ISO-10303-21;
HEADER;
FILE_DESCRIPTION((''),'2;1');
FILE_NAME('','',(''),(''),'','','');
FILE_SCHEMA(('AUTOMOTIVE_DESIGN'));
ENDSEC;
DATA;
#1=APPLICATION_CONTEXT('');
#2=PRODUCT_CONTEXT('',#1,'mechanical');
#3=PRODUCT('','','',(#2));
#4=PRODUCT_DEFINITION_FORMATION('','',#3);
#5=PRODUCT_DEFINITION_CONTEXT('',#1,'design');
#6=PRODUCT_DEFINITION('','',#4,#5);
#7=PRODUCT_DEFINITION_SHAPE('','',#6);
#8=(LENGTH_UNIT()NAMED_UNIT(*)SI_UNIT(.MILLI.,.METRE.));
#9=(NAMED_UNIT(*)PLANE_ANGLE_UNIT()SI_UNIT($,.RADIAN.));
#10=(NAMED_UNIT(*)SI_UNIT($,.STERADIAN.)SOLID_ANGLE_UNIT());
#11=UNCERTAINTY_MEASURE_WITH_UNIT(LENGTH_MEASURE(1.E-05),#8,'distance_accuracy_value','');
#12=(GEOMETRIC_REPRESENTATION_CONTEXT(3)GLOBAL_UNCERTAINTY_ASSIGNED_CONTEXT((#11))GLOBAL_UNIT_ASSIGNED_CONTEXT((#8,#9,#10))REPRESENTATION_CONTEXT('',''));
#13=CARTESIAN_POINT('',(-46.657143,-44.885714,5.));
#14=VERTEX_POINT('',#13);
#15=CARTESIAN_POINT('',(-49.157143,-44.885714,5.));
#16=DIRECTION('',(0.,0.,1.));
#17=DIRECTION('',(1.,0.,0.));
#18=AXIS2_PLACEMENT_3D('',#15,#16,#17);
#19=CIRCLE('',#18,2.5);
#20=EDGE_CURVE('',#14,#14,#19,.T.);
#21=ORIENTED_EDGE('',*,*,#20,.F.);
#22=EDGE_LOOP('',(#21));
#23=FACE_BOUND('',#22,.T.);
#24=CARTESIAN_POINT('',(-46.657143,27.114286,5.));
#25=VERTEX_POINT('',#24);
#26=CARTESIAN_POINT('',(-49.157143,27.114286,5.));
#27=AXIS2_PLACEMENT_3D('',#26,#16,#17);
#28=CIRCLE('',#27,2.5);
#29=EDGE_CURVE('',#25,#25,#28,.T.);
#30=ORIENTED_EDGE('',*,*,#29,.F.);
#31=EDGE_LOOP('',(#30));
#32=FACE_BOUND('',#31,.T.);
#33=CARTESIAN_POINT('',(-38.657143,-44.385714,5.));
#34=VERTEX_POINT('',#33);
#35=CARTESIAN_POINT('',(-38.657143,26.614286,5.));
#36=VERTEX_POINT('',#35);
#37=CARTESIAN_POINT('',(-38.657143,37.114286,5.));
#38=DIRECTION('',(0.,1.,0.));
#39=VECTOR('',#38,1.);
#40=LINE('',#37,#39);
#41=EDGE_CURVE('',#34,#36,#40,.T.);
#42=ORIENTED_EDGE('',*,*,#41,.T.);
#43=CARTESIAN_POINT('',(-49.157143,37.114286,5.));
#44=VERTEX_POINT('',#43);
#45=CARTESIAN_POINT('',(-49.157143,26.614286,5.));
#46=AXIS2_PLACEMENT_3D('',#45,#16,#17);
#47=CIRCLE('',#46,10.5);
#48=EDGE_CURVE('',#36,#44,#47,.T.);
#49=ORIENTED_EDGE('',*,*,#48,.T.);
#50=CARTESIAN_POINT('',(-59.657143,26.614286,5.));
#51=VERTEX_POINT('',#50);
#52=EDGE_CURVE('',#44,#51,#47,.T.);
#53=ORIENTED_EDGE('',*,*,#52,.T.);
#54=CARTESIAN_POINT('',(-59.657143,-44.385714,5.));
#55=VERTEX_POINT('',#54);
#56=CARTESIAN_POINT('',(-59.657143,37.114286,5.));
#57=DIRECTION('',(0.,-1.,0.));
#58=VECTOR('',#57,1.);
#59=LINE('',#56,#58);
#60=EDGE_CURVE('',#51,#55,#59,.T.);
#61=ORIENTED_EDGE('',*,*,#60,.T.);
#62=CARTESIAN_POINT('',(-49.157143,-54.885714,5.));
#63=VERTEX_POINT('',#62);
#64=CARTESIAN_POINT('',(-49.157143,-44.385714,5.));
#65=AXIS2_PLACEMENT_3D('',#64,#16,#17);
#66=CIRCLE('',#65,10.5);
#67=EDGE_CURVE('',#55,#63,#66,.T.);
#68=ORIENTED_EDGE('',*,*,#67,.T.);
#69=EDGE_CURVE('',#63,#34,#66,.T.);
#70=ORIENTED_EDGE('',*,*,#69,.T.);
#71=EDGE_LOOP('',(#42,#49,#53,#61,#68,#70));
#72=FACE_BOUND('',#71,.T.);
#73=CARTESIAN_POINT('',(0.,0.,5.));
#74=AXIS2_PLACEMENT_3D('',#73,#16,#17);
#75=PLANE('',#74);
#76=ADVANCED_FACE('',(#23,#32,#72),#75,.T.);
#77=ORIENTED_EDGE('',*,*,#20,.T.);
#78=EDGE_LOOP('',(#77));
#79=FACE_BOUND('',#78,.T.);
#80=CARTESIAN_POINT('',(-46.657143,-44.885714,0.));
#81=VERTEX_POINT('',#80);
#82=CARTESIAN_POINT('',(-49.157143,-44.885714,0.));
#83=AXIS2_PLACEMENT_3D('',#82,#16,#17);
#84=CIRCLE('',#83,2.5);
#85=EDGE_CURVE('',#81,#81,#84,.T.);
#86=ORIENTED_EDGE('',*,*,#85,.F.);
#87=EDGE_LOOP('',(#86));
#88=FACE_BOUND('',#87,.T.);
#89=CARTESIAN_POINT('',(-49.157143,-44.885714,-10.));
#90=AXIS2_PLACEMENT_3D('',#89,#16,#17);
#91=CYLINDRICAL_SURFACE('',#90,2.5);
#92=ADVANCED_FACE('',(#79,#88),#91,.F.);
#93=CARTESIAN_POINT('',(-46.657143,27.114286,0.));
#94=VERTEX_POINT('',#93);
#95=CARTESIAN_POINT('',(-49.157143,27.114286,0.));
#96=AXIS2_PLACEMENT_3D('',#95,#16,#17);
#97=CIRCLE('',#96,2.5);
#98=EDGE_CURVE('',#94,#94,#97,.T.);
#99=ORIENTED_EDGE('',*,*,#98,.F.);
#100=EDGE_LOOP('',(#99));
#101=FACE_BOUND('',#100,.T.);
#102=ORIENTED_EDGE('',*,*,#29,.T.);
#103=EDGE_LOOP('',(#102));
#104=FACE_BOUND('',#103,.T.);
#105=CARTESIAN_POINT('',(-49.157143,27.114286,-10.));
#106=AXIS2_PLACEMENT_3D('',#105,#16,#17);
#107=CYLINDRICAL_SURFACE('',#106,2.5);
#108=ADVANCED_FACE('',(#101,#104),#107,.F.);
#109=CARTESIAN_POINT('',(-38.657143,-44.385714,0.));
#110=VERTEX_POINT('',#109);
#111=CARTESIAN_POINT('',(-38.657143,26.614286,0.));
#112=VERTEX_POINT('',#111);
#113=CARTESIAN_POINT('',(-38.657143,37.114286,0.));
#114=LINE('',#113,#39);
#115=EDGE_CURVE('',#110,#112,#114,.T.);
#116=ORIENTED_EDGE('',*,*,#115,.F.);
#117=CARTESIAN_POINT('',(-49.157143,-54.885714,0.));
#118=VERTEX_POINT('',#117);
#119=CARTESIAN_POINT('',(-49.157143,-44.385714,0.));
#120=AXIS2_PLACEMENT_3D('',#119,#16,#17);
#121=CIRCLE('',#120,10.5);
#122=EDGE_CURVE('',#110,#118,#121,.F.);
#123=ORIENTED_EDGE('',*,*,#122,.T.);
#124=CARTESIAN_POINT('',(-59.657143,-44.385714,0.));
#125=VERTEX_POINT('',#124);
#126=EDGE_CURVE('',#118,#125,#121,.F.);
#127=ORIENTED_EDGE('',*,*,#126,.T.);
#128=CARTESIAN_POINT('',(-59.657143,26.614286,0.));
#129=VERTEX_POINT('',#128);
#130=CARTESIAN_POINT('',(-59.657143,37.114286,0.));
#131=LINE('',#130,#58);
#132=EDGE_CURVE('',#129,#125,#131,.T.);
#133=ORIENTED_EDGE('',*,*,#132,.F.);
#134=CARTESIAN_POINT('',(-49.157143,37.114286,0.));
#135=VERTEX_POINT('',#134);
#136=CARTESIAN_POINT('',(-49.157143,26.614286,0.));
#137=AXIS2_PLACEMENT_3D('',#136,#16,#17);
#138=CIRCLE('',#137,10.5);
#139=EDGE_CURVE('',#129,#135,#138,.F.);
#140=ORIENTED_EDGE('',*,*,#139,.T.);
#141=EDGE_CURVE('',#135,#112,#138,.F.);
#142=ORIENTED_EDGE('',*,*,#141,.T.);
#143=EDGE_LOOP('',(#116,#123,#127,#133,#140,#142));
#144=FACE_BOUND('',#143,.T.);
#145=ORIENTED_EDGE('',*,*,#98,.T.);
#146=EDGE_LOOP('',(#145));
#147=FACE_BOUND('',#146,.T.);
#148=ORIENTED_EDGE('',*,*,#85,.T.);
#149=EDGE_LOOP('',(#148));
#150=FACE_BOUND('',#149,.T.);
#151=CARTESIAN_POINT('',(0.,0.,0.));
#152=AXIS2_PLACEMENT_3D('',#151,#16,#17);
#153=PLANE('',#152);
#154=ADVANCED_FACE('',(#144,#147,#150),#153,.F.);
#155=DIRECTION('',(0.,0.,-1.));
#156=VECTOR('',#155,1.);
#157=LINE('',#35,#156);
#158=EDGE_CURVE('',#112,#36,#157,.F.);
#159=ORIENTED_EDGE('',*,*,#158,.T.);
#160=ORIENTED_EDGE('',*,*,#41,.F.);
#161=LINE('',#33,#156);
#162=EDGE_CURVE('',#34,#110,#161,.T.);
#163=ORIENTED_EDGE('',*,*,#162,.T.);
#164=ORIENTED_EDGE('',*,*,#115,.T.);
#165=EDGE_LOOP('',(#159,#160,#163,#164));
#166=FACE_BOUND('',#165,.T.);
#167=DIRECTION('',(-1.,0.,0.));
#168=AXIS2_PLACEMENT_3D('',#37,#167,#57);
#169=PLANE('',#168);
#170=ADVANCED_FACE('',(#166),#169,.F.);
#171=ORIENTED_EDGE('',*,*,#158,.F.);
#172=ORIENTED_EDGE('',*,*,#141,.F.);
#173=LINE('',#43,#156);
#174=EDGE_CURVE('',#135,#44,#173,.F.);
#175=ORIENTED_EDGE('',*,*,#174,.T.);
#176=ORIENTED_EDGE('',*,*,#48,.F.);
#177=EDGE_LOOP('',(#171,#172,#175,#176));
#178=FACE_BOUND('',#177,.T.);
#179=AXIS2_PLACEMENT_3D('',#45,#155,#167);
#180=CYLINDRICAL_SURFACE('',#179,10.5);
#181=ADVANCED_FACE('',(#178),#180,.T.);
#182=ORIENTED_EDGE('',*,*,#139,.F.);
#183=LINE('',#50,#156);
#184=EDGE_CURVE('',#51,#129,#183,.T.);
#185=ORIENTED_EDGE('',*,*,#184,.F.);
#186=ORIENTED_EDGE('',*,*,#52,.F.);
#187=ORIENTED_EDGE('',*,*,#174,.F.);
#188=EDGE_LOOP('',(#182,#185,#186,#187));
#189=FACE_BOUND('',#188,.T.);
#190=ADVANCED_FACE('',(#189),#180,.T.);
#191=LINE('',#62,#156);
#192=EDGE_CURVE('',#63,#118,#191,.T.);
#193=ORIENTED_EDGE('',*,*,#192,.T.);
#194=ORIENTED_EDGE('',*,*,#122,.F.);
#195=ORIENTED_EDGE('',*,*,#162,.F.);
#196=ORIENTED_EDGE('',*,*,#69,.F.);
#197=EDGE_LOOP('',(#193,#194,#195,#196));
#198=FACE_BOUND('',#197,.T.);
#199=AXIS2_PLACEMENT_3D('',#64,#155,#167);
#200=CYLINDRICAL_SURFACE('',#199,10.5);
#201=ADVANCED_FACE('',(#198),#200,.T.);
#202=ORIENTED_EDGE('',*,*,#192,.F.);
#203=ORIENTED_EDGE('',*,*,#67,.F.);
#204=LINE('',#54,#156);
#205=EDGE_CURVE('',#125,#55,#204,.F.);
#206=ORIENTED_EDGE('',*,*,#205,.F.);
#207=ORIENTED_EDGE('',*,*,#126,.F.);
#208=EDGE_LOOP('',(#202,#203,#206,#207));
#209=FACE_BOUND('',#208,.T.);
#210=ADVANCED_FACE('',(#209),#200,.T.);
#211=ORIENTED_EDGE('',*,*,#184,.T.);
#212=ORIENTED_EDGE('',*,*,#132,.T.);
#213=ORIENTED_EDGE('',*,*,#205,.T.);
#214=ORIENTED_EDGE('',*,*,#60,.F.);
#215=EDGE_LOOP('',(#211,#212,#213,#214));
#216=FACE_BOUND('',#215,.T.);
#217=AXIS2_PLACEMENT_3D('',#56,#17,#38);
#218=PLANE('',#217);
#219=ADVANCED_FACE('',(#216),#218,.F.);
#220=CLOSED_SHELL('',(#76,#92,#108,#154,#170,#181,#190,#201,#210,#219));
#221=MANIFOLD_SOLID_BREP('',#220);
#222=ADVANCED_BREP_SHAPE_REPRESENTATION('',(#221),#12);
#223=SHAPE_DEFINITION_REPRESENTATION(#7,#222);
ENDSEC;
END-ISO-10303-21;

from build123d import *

# Parameters (mm, degrees)
SKETCH_1_W          = 21
SKETCH_1_H          = 92
EXTRUDE_1_DEPTH     = 5
SKETCH_3_R          = 2.5
CUT_EXTRUDE_1_DEPTH = 15
SKETCH_4_R          = 2.5
CUT_EXTRUDE_2_DEPTH = 15
FILLET_2_R          = 10.5


with BuildPart() as part:
    # 草图1 → 凸台-拉伸1 (new body)
    with BuildSketch(Plane.XY):
        with Locations((-49.157142857, -8.885714286)):
            Rectangle(SKETCH_1_W, SKETCH_1_H)
    extrude(amount=EXTRUDE_1_DEPTH)

    # 草图3 → 切除-拉伸1 (cut)
    with BuildSketch(Plane.XY.offset(5)):
        with Locations((-49.157142857, -44.885714286)):
            Circle(SKETCH_3_R)
    extrude(amount=-CUT_EXTRUDE_1_DEPTH, mode=Mode.SUBTRACT)

    # 草图4 → 切除-拉伸2 (cut)
    with BuildSketch(Plane.XY.offset(5)):
        with Locations((-49.157142857, 27.114285714)):
            Circle(SKETCH_4_R)
    extrude(amount=-CUT_EXTRUDE_2_DEPTH, mode=Mode.SUBTRACT)

    # 圆角2
    fillet_2_edges = [part.edges().sort_by_distance(p)[0] for p in [
        (-38.657142857, 37.114285714, 2.5),
        (-59.657142857, 37.114285714, 2.5),
        (-38.657142857, -54.885714286, 2.5),
        (-59.657142857, -54.885714286, 2.5),
    ]]
    fillet(fillet_2_edges, radius=FILLET_2_R - 0.0001)  # a hair under: the kernel refuses the full size


solid = part.part
